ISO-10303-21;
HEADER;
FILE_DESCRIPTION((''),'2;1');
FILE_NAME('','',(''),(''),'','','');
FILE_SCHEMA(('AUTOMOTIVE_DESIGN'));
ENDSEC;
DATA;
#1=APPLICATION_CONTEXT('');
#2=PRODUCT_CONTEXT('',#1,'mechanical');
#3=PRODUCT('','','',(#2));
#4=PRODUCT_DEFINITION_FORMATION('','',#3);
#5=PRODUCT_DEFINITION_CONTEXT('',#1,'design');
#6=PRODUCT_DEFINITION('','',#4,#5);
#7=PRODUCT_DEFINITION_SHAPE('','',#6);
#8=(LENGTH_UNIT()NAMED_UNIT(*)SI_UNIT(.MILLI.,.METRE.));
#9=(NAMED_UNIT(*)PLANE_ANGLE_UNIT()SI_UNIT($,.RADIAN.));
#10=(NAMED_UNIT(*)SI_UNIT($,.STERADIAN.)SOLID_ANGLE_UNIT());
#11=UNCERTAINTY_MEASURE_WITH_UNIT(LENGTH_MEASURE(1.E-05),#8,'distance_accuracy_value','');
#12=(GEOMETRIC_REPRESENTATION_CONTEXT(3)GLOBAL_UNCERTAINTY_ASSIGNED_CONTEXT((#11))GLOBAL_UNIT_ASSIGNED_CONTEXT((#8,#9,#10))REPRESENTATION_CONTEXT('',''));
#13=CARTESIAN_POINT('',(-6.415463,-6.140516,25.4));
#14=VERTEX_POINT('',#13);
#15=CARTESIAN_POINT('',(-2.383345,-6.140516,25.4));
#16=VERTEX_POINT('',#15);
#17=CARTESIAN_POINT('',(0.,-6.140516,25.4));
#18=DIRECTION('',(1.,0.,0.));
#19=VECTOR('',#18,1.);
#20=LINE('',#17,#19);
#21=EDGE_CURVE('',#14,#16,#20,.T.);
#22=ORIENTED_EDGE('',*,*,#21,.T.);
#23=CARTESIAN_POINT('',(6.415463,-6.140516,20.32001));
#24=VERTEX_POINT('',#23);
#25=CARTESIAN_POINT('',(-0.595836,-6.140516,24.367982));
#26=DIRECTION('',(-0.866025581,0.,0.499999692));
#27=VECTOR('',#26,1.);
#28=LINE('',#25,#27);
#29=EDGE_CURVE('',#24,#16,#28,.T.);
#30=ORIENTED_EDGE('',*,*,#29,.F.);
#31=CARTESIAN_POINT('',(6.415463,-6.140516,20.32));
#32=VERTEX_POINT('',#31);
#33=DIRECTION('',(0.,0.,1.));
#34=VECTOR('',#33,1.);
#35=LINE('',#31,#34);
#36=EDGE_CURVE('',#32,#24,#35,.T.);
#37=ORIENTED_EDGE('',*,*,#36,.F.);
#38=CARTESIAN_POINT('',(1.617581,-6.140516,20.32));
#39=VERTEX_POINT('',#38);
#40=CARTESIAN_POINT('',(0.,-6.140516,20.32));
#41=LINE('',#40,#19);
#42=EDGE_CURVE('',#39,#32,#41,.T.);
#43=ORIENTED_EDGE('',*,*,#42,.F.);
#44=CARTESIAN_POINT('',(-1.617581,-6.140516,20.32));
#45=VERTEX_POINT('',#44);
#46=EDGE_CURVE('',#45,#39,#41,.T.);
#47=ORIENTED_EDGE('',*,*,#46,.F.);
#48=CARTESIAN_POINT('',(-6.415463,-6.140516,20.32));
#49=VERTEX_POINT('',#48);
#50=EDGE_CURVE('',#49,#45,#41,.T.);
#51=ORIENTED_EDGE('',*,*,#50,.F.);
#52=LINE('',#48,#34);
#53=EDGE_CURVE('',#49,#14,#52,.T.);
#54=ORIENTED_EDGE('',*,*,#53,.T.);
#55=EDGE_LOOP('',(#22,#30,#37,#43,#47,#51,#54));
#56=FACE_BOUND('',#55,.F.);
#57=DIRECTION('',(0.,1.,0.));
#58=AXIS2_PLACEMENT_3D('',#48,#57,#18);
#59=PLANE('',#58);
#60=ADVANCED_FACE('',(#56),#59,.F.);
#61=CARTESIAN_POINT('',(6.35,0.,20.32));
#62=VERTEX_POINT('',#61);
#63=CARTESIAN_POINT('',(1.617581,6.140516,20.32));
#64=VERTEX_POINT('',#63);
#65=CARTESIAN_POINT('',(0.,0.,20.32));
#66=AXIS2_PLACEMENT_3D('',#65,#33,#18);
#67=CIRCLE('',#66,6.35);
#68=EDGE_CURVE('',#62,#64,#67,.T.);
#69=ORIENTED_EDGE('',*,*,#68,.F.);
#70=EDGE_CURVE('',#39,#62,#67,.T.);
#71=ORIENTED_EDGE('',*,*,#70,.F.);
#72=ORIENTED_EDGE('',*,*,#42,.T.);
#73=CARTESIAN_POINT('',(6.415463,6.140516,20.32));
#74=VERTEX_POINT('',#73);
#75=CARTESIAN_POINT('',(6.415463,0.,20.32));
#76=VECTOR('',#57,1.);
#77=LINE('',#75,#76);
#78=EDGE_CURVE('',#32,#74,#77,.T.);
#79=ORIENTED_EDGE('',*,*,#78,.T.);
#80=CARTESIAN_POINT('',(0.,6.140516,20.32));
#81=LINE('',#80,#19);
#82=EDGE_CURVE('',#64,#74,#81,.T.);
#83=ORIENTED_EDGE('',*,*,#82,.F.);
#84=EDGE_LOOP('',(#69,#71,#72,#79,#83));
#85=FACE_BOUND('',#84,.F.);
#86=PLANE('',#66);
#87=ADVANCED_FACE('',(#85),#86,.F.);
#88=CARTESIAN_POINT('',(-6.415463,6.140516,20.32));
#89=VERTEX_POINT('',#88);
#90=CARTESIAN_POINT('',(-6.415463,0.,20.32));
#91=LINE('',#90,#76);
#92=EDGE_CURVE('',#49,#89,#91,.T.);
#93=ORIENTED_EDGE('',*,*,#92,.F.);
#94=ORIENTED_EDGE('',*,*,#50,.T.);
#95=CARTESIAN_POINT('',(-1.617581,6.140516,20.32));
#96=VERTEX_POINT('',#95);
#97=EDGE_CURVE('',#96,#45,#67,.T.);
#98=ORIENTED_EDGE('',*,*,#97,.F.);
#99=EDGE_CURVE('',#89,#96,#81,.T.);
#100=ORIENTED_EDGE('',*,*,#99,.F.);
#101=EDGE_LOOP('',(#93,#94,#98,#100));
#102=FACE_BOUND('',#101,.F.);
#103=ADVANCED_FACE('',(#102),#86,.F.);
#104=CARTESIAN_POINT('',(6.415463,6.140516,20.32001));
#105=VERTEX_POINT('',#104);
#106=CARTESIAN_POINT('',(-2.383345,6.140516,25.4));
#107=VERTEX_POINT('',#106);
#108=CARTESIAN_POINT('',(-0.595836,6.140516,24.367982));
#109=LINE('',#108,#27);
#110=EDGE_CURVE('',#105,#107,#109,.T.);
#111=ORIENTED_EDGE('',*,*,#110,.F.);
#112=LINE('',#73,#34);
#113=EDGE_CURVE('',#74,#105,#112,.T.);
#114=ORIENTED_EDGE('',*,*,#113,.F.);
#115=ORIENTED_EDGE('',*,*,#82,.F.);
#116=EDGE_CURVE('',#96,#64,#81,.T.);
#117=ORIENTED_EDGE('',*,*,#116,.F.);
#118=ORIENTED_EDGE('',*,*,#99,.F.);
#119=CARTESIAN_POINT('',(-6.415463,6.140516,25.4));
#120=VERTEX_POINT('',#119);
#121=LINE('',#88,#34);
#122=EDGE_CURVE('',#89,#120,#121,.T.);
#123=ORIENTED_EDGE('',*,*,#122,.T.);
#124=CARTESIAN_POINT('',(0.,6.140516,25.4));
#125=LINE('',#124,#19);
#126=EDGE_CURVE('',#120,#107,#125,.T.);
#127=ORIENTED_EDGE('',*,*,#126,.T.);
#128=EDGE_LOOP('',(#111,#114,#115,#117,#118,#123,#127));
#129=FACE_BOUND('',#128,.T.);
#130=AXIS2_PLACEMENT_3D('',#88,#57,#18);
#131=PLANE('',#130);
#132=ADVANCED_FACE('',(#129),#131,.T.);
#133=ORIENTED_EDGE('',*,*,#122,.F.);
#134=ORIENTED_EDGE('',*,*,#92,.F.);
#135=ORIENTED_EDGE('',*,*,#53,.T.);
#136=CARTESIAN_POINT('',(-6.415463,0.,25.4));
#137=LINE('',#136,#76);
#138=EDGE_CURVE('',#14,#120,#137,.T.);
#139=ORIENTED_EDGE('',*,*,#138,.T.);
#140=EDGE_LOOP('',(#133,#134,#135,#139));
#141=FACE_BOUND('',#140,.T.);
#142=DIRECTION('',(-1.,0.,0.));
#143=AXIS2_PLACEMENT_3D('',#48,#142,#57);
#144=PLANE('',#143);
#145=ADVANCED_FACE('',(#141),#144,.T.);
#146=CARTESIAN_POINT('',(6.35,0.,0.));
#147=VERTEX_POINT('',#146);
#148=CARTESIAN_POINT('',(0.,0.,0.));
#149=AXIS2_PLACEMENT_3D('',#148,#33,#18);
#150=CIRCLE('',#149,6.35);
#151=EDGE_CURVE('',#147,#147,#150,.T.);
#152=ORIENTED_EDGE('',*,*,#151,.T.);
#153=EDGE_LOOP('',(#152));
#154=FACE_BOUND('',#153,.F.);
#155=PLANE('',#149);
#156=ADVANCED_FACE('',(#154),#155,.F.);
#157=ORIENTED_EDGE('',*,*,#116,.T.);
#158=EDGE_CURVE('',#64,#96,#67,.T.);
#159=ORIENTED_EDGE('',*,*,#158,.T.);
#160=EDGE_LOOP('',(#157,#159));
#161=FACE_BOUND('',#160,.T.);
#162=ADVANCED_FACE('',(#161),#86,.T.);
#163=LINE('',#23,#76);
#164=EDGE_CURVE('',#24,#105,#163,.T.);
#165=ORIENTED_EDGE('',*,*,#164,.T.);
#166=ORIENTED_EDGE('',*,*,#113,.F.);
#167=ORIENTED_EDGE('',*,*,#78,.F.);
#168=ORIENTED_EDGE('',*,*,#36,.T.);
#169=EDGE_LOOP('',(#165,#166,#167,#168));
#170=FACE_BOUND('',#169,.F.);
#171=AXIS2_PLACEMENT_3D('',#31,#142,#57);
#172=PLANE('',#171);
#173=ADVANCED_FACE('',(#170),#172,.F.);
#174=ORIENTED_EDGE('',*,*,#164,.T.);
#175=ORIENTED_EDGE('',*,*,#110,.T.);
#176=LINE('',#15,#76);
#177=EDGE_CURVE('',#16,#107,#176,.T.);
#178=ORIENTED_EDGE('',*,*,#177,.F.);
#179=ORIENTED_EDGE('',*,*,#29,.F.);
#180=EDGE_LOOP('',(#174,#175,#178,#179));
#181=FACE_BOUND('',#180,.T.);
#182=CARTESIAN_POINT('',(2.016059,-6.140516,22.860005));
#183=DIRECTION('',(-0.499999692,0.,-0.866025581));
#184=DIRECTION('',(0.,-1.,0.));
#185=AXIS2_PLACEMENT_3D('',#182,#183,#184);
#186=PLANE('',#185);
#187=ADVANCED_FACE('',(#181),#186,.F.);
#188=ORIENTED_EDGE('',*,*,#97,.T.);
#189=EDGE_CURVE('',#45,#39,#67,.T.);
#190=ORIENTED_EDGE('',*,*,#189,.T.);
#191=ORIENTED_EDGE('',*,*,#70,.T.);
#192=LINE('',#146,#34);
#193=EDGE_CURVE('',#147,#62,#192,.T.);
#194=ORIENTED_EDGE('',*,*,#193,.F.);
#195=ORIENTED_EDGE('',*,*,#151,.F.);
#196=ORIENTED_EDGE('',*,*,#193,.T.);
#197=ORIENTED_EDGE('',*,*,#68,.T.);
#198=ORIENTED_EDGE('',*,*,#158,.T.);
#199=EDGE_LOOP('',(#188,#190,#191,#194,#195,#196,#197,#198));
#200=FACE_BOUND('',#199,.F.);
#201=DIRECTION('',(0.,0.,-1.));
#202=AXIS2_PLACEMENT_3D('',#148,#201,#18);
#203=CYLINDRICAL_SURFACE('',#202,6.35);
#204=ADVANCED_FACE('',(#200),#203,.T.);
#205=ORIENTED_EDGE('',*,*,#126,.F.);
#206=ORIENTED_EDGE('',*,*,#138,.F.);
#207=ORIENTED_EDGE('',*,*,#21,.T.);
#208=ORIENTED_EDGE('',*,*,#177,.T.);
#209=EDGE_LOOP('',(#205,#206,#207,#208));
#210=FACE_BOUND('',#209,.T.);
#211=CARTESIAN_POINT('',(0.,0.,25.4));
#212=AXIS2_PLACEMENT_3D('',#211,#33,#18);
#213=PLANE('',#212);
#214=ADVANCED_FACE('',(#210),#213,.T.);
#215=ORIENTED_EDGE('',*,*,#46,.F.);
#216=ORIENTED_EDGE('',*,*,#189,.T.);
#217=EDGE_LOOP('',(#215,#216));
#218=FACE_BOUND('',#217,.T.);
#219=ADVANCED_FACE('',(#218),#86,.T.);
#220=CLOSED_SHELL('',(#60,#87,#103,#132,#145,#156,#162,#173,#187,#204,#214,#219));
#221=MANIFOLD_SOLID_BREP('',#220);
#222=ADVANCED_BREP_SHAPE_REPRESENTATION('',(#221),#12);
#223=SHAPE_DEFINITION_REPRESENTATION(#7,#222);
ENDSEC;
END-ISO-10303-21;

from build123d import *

# Parameters (mm, degrees)
F0_R     = 6.35
F1_DEPTH = 20.32
F2_W     = 12.8309261054
F2_H     = 12.2810313478
F3_DEPTH = 5.08
F4_SIZE2 = 8.798808
F4_SIZE  = 5.07999


# Not quite as in the source:
# - a fillet or chamfer is up to 0.001 mm smaller than in the source, because OpenCascade refuses the exact size


with BuildPart() as f1:
    # F0 (on Top) → F1 (new body)
    with BuildSketch(Plane.XY):
        Circle(F0_R)
    extrude(amount=F1_DEPTH)

    # F2 (on face) → F3 (join)
    with BuildSketch(Plane.XY.offset(20.32)):
        Rectangle(F2_W, F2_H)
    extrude(amount=F3_DEPTH)

    # F4 (size 5.08 and 8.7988181024 in the source; OpenCascade refuses exactly that, so slightly less here)
    f4_edges = [f1.edges().sort_by_distance(p)[0] for p in [
        (6.415463, 0, 25.4),
    ]]
    f4_side = f1.faces().sort_by_distance((6.415463, 0, 22.86))[0]
    chamfer(f4_edges, length=F4_SIZE, length2=F4_SIZE2, reference=f4_side)


solid = f1.part
